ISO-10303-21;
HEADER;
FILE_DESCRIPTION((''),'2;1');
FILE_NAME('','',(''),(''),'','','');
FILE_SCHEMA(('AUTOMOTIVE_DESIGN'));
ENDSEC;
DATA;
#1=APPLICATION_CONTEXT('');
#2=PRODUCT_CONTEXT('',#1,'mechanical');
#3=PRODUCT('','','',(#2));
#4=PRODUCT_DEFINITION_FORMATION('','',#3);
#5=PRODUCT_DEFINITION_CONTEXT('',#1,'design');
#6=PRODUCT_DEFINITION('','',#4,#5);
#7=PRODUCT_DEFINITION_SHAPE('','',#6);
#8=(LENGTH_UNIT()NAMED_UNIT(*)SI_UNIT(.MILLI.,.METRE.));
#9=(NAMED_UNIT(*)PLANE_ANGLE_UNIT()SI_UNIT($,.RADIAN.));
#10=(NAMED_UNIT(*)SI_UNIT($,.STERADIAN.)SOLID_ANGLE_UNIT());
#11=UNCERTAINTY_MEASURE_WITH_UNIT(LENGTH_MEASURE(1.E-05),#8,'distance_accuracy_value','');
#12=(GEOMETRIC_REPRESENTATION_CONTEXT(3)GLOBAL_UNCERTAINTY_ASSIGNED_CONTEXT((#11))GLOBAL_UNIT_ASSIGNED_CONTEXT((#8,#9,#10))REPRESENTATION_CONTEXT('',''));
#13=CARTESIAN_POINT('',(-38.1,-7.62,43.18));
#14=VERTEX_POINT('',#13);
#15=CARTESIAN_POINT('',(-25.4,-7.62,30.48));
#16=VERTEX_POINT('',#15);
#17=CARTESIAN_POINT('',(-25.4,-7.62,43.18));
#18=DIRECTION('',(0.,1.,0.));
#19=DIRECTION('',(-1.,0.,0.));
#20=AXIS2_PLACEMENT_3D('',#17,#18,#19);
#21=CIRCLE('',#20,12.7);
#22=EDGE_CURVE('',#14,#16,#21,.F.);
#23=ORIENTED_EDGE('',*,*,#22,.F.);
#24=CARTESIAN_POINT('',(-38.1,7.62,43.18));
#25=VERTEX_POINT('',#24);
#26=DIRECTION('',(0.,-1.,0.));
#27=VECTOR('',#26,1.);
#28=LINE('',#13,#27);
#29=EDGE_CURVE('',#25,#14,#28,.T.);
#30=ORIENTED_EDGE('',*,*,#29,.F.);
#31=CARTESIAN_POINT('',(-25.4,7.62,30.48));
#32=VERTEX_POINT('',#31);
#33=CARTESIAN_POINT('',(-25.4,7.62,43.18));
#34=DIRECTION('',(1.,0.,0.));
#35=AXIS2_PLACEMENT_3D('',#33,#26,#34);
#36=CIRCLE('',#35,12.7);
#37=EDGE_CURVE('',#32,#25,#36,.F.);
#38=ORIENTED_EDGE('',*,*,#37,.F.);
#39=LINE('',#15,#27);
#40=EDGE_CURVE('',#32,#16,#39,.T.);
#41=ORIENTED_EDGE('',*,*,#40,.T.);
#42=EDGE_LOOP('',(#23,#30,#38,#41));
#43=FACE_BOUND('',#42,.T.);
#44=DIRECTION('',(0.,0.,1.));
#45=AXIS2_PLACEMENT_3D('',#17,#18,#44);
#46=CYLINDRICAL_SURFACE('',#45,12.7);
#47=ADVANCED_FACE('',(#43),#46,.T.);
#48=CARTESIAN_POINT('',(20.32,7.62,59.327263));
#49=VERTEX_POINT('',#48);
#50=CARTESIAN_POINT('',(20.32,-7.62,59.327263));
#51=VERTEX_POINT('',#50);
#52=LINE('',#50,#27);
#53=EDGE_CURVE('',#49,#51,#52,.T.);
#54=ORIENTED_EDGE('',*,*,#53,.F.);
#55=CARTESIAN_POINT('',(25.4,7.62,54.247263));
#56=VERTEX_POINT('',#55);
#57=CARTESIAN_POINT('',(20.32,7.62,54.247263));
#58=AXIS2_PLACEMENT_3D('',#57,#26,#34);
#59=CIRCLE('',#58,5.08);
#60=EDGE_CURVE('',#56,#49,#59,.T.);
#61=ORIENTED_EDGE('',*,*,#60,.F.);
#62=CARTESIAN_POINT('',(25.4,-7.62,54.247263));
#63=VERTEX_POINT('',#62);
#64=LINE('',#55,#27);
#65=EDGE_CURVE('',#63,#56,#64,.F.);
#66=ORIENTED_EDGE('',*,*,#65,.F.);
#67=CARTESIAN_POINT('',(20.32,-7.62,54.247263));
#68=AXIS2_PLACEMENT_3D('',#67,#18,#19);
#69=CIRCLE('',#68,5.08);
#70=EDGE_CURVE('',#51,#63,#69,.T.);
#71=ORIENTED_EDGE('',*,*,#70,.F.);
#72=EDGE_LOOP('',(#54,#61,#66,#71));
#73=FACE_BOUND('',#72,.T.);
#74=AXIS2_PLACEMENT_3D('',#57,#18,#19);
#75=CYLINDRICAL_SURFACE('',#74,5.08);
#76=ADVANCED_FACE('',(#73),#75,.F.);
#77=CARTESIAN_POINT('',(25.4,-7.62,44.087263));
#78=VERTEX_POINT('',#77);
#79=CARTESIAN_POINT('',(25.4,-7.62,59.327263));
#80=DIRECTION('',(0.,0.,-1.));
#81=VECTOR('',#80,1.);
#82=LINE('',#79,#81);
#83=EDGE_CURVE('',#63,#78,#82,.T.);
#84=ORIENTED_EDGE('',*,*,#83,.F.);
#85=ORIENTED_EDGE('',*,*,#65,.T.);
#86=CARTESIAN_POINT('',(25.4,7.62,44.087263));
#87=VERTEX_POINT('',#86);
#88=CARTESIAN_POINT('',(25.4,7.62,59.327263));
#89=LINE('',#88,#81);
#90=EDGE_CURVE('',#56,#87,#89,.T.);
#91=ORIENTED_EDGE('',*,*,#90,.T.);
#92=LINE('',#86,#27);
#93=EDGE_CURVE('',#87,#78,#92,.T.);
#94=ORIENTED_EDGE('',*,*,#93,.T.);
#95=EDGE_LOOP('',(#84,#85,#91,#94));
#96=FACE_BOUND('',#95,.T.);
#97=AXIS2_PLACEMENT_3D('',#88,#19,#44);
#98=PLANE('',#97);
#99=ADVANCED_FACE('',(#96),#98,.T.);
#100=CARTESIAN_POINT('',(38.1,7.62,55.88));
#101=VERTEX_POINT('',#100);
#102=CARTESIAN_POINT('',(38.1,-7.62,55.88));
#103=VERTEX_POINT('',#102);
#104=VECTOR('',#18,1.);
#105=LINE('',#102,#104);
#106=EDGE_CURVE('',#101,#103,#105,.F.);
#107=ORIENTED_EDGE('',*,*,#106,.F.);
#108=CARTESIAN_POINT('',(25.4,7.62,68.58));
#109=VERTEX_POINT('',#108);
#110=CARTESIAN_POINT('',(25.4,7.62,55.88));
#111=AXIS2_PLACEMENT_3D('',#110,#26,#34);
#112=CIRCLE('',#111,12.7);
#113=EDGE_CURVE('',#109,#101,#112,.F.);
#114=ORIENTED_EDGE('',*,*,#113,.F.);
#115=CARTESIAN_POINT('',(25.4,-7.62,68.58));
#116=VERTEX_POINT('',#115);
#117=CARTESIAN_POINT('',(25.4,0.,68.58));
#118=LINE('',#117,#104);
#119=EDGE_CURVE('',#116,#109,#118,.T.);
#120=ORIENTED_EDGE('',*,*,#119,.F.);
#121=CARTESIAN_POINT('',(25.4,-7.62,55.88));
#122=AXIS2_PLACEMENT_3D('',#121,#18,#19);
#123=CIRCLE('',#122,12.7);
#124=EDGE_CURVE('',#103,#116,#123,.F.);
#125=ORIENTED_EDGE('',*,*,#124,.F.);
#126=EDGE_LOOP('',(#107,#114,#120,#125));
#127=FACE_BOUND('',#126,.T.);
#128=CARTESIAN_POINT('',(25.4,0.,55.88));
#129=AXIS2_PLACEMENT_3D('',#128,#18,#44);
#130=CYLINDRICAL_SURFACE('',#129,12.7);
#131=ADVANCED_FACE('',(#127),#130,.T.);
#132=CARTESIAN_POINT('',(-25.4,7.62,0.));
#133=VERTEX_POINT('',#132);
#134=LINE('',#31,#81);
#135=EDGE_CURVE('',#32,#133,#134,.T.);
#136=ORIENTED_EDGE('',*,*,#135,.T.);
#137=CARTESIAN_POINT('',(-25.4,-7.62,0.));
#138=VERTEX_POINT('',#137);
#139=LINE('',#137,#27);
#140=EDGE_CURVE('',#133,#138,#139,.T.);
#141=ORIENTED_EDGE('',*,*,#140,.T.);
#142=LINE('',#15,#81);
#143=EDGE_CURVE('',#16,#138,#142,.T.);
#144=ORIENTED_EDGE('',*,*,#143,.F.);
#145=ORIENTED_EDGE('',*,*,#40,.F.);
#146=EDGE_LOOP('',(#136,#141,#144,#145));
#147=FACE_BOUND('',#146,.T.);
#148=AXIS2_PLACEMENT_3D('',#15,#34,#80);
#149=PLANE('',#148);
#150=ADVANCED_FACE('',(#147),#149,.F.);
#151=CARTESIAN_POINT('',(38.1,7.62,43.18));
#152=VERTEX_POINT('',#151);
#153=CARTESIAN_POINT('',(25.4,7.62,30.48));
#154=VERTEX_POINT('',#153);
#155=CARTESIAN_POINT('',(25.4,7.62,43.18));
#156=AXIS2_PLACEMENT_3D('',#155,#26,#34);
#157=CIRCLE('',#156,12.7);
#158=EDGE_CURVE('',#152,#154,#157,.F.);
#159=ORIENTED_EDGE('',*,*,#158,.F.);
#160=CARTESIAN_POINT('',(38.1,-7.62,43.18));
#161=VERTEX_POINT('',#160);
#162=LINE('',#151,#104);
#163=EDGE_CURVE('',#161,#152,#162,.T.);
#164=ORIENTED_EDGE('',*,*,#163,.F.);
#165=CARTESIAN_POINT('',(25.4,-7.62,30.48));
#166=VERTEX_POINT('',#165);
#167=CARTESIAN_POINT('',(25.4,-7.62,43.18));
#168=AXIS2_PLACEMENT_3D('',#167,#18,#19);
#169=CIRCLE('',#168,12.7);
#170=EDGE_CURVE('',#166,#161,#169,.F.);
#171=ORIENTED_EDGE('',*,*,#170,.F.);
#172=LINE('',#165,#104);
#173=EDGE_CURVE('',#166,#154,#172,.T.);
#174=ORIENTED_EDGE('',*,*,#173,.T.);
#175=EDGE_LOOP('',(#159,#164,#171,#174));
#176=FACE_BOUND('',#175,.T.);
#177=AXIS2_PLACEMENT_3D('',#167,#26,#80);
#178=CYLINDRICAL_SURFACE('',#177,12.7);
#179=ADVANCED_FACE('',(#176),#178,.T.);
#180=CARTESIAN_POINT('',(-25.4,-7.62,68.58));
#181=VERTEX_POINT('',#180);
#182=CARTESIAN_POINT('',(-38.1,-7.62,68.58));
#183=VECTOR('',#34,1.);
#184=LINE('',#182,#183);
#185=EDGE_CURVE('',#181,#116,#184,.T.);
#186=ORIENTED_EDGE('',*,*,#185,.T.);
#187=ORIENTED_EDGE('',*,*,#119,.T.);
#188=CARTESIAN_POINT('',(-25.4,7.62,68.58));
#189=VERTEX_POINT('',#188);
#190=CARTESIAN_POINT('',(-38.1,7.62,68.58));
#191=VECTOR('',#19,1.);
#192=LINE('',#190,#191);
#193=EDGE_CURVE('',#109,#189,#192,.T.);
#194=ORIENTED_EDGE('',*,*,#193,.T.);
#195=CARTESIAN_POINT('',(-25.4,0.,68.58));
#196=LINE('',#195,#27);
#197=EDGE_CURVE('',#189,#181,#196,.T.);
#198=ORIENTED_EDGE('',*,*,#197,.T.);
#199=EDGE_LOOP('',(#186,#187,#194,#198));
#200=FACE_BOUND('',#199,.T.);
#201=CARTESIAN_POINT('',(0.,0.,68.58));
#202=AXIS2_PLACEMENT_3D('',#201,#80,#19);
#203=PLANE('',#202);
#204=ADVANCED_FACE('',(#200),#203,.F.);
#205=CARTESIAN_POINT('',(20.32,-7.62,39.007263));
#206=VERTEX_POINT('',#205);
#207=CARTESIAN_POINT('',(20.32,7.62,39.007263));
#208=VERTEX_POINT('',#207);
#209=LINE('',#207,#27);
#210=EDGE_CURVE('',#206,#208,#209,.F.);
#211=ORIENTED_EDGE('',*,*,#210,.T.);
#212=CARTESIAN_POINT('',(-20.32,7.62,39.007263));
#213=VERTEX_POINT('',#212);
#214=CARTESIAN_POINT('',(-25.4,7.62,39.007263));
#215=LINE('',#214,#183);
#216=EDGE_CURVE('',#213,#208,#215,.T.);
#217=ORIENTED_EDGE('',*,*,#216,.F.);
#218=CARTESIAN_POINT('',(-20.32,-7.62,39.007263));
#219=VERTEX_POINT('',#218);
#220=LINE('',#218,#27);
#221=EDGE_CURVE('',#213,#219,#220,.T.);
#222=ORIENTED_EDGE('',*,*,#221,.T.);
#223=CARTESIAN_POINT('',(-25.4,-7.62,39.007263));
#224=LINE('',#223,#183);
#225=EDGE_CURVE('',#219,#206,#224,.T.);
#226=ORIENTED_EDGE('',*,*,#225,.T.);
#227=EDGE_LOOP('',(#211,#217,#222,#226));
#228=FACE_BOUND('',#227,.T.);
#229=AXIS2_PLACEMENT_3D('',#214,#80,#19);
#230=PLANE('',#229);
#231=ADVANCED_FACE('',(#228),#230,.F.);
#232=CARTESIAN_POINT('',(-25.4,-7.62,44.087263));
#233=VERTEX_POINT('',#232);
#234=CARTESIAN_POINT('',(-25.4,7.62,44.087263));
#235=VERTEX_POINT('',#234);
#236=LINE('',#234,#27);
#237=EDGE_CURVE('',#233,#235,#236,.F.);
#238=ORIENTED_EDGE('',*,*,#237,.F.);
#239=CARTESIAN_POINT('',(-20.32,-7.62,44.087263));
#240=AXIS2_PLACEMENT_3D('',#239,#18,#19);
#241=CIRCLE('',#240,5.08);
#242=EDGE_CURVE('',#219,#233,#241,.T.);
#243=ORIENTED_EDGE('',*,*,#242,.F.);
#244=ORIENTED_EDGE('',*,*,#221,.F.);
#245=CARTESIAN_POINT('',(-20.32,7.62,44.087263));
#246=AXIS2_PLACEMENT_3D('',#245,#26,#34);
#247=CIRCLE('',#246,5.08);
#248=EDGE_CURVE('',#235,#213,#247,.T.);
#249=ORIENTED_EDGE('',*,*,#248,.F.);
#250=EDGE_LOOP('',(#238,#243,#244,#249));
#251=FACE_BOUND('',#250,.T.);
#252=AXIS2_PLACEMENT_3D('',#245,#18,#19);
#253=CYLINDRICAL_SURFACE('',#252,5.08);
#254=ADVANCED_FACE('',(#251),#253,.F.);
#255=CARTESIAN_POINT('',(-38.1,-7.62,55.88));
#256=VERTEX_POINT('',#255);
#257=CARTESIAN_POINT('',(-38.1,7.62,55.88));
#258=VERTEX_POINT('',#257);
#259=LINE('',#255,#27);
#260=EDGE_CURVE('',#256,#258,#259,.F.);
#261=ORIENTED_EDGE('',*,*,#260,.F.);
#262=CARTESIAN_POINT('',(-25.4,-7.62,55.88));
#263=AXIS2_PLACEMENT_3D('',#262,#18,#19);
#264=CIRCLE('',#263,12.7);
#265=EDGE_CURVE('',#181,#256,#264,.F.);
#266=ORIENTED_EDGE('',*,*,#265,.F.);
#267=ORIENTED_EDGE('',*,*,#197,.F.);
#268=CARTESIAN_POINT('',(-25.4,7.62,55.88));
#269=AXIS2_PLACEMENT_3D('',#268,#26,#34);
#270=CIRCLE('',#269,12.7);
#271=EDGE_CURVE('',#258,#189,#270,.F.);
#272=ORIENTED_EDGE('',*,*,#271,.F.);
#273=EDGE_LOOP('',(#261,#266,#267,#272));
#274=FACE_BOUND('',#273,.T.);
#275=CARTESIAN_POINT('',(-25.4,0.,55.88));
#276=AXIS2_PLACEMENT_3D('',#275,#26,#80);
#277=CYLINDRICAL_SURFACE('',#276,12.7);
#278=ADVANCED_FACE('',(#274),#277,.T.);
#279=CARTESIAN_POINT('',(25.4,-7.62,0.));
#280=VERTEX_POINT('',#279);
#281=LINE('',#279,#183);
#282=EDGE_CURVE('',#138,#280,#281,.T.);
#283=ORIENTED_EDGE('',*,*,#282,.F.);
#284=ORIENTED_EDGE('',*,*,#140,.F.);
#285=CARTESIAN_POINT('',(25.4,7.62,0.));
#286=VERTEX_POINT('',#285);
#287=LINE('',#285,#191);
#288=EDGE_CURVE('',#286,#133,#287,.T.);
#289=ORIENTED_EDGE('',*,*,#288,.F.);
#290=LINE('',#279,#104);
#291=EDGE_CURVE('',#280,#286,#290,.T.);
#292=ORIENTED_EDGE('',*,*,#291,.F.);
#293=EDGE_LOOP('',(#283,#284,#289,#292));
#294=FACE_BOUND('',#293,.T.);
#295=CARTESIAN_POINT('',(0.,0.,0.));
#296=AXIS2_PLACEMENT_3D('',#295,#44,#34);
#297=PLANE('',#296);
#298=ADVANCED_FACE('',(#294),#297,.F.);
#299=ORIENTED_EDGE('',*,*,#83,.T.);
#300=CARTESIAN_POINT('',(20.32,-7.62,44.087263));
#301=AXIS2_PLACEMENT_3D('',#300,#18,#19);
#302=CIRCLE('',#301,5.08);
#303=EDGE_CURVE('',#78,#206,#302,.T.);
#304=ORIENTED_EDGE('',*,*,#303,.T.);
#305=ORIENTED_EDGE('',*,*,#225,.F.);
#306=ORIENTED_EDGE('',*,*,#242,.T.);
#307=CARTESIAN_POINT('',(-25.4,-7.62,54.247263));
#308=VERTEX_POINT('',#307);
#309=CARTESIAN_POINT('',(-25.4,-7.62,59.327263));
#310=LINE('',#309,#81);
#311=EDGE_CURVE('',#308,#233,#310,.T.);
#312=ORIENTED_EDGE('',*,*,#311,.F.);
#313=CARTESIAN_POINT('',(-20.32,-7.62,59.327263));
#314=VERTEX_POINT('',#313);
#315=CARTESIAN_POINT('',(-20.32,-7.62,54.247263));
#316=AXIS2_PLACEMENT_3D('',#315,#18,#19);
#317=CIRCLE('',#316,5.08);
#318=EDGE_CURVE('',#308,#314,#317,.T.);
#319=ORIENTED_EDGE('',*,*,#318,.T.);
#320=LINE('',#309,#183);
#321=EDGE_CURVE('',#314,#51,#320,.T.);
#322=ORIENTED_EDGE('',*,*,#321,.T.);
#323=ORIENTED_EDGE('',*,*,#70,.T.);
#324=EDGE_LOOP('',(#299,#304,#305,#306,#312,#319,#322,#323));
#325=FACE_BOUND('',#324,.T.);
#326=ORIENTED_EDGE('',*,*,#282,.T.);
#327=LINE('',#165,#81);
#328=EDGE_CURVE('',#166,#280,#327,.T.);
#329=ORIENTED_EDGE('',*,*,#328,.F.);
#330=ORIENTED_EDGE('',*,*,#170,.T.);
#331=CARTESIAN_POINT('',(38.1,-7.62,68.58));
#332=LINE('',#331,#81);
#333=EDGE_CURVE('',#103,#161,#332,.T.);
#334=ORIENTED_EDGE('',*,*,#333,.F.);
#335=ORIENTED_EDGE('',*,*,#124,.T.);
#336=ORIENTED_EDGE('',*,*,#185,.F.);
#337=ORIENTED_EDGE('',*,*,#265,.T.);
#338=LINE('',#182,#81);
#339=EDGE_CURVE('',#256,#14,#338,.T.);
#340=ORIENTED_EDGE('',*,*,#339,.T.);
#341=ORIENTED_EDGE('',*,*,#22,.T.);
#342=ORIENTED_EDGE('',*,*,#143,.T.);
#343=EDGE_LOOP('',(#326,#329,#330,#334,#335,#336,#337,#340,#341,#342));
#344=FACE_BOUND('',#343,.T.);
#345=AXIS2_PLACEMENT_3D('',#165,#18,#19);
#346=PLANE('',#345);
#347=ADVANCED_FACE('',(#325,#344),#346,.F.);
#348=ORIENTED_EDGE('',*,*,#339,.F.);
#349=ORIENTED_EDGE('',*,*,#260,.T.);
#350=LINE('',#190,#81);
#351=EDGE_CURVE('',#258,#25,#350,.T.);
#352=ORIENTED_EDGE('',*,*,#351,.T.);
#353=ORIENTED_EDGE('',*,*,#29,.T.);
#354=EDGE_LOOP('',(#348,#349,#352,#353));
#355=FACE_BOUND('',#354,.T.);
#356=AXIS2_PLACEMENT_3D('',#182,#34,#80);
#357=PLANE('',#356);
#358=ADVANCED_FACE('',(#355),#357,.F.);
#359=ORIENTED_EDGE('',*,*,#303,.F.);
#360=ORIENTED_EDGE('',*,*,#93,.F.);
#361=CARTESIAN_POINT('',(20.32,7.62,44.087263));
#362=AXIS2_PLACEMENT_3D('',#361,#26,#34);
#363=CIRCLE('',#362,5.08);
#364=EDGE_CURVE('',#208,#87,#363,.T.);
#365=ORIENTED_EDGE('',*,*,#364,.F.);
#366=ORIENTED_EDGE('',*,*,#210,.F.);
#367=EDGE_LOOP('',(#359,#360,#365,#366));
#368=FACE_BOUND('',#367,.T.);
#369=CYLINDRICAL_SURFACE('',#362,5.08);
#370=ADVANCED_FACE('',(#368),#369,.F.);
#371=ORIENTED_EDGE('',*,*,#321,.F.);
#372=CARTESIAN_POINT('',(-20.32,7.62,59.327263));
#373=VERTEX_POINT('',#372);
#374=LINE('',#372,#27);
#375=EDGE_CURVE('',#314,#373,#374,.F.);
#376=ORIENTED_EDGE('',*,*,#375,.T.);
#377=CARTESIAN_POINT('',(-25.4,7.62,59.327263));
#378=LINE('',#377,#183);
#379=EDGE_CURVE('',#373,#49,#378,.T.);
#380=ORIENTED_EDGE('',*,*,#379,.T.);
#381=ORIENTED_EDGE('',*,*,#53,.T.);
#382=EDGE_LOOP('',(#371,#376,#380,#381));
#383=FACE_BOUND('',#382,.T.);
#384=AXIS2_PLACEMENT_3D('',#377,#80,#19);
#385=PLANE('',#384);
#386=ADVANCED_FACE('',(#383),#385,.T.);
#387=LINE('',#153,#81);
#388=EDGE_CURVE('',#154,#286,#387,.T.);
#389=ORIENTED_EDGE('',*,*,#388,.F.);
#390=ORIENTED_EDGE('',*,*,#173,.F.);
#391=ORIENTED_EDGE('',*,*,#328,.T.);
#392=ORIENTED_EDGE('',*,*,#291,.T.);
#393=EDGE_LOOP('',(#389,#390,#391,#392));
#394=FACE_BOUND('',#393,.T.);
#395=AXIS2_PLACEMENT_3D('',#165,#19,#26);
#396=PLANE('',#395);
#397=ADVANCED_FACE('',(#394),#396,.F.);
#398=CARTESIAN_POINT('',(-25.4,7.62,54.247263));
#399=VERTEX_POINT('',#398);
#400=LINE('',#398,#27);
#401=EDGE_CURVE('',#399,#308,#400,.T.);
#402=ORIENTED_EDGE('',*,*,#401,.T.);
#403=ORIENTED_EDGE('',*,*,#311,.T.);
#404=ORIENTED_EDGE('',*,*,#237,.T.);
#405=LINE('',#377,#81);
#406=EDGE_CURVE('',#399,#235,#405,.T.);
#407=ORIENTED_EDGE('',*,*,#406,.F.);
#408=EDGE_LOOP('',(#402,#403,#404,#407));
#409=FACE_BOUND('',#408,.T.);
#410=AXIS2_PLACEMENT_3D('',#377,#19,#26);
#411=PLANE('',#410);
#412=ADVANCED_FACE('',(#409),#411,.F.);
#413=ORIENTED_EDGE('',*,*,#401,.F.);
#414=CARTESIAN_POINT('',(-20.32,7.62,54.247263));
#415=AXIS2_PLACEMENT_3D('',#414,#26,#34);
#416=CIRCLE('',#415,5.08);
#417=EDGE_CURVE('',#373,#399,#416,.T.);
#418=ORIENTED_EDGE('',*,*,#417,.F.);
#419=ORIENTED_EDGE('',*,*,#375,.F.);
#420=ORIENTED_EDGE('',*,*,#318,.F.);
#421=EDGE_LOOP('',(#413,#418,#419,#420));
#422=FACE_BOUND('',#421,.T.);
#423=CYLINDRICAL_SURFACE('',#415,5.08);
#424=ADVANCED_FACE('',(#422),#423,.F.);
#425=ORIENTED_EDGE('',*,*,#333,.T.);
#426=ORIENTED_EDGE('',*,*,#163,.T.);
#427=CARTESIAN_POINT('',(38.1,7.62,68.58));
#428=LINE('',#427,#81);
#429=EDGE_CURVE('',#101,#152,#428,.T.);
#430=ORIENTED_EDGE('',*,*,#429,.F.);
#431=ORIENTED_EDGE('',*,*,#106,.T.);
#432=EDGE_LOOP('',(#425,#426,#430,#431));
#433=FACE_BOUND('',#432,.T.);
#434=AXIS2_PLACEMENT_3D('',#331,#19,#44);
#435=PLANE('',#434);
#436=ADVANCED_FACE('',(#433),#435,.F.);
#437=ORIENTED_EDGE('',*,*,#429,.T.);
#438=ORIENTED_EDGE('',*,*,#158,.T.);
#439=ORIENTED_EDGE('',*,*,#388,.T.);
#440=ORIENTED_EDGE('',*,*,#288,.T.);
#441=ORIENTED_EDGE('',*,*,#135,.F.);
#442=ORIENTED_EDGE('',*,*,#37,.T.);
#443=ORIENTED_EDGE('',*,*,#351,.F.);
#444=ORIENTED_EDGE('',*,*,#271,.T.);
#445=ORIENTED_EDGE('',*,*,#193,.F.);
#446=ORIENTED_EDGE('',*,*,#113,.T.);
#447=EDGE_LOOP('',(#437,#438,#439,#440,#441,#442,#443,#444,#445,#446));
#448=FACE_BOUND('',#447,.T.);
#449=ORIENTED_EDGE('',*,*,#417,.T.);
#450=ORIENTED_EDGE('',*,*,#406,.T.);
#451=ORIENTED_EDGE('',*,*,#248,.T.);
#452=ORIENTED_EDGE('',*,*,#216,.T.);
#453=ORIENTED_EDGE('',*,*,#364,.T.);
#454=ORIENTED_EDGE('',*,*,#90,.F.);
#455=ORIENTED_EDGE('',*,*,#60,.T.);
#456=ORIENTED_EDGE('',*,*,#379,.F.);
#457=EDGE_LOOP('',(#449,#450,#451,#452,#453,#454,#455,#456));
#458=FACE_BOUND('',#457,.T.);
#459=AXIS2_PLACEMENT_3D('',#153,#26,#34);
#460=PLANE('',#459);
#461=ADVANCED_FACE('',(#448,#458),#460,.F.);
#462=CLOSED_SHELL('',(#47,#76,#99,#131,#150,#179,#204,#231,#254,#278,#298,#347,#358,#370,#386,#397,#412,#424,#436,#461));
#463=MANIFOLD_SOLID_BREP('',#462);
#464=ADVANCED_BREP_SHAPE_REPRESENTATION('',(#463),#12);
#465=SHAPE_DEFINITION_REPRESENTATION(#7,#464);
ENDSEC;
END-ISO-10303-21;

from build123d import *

# Parameters (mm, degrees)
SKETCH1_W           = 50.8
SKETCH1_H           = 15.24
BOSS_EXTRUDE2_DEPTH = 30.48
SKETCH2_W           = 76.2
SKETCH2_H           = 15.24
BOSS_EXTRUDE3_DEPTH = 38.1
SKETCH3_W           = 50.8
SKETCH3_H           = 20.32
CUT_EXTRUDE1_DEPTH  = 80.919234231
FILLET1_R           = 5.08
FILLET4_R           = 12.7


with BuildPart() as part:
    # Sketch1 → Boss-Extrude2 (new body)
    with BuildSketch(Plane.XY):
        Rectangle(SKETCH1_W, SKETCH1_H)
    extrude(amount=BOSS_EXTRUDE2_DEPTH)

    # Sketch2 → Boss-Extrude3 (add)
    with BuildSketch(Plane.XY.offset(30.48)):
        Rectangle(SKETCH2_W, SKETCH2_H)
    extrude(amount=BOSS_EXTRUDE3_DEPTH)

    # Sketch3 → Cut-Extrude1 (cut, through all)
    with BuildSketch(Plane.XZ.offset(7.62)):
        with Locations((0, 49.167262881)):
            Rectangle(SKETCH3_W, SKETCH3_H)
    extrude(amount=-CUT_EXTRUDE1_DEPTH, mode=Mode.SUBTRACT)

    # Fillet1
    fillet1_edges = [part.edges().sort_by_distance(p)[0] for p in [
        (-25.4, 0, 39.007262881),
        (-25.4, 0, 59.327262881),
        (25.4, 0, 59.327262881),
        (25.4, 0, 39.007262881),
    ]]
    fillet(fillet1_edges, radius=FILLET1_R)

    # Fillet4
    fillet4_edges = [part.edges().sort_by_distance(p)[0] for p in [
        (38.1, 0, 30.48),
        (38.1, 0, 68.58),
        (-38.1, 0, 30.48),
        (-38.1, 0, 68.58),
    ]]
    fillet(fillet4_edges, radius=FILLET4_R - 0.0001)  # a hair under: the kernel refuses the full size


solid = part.part
